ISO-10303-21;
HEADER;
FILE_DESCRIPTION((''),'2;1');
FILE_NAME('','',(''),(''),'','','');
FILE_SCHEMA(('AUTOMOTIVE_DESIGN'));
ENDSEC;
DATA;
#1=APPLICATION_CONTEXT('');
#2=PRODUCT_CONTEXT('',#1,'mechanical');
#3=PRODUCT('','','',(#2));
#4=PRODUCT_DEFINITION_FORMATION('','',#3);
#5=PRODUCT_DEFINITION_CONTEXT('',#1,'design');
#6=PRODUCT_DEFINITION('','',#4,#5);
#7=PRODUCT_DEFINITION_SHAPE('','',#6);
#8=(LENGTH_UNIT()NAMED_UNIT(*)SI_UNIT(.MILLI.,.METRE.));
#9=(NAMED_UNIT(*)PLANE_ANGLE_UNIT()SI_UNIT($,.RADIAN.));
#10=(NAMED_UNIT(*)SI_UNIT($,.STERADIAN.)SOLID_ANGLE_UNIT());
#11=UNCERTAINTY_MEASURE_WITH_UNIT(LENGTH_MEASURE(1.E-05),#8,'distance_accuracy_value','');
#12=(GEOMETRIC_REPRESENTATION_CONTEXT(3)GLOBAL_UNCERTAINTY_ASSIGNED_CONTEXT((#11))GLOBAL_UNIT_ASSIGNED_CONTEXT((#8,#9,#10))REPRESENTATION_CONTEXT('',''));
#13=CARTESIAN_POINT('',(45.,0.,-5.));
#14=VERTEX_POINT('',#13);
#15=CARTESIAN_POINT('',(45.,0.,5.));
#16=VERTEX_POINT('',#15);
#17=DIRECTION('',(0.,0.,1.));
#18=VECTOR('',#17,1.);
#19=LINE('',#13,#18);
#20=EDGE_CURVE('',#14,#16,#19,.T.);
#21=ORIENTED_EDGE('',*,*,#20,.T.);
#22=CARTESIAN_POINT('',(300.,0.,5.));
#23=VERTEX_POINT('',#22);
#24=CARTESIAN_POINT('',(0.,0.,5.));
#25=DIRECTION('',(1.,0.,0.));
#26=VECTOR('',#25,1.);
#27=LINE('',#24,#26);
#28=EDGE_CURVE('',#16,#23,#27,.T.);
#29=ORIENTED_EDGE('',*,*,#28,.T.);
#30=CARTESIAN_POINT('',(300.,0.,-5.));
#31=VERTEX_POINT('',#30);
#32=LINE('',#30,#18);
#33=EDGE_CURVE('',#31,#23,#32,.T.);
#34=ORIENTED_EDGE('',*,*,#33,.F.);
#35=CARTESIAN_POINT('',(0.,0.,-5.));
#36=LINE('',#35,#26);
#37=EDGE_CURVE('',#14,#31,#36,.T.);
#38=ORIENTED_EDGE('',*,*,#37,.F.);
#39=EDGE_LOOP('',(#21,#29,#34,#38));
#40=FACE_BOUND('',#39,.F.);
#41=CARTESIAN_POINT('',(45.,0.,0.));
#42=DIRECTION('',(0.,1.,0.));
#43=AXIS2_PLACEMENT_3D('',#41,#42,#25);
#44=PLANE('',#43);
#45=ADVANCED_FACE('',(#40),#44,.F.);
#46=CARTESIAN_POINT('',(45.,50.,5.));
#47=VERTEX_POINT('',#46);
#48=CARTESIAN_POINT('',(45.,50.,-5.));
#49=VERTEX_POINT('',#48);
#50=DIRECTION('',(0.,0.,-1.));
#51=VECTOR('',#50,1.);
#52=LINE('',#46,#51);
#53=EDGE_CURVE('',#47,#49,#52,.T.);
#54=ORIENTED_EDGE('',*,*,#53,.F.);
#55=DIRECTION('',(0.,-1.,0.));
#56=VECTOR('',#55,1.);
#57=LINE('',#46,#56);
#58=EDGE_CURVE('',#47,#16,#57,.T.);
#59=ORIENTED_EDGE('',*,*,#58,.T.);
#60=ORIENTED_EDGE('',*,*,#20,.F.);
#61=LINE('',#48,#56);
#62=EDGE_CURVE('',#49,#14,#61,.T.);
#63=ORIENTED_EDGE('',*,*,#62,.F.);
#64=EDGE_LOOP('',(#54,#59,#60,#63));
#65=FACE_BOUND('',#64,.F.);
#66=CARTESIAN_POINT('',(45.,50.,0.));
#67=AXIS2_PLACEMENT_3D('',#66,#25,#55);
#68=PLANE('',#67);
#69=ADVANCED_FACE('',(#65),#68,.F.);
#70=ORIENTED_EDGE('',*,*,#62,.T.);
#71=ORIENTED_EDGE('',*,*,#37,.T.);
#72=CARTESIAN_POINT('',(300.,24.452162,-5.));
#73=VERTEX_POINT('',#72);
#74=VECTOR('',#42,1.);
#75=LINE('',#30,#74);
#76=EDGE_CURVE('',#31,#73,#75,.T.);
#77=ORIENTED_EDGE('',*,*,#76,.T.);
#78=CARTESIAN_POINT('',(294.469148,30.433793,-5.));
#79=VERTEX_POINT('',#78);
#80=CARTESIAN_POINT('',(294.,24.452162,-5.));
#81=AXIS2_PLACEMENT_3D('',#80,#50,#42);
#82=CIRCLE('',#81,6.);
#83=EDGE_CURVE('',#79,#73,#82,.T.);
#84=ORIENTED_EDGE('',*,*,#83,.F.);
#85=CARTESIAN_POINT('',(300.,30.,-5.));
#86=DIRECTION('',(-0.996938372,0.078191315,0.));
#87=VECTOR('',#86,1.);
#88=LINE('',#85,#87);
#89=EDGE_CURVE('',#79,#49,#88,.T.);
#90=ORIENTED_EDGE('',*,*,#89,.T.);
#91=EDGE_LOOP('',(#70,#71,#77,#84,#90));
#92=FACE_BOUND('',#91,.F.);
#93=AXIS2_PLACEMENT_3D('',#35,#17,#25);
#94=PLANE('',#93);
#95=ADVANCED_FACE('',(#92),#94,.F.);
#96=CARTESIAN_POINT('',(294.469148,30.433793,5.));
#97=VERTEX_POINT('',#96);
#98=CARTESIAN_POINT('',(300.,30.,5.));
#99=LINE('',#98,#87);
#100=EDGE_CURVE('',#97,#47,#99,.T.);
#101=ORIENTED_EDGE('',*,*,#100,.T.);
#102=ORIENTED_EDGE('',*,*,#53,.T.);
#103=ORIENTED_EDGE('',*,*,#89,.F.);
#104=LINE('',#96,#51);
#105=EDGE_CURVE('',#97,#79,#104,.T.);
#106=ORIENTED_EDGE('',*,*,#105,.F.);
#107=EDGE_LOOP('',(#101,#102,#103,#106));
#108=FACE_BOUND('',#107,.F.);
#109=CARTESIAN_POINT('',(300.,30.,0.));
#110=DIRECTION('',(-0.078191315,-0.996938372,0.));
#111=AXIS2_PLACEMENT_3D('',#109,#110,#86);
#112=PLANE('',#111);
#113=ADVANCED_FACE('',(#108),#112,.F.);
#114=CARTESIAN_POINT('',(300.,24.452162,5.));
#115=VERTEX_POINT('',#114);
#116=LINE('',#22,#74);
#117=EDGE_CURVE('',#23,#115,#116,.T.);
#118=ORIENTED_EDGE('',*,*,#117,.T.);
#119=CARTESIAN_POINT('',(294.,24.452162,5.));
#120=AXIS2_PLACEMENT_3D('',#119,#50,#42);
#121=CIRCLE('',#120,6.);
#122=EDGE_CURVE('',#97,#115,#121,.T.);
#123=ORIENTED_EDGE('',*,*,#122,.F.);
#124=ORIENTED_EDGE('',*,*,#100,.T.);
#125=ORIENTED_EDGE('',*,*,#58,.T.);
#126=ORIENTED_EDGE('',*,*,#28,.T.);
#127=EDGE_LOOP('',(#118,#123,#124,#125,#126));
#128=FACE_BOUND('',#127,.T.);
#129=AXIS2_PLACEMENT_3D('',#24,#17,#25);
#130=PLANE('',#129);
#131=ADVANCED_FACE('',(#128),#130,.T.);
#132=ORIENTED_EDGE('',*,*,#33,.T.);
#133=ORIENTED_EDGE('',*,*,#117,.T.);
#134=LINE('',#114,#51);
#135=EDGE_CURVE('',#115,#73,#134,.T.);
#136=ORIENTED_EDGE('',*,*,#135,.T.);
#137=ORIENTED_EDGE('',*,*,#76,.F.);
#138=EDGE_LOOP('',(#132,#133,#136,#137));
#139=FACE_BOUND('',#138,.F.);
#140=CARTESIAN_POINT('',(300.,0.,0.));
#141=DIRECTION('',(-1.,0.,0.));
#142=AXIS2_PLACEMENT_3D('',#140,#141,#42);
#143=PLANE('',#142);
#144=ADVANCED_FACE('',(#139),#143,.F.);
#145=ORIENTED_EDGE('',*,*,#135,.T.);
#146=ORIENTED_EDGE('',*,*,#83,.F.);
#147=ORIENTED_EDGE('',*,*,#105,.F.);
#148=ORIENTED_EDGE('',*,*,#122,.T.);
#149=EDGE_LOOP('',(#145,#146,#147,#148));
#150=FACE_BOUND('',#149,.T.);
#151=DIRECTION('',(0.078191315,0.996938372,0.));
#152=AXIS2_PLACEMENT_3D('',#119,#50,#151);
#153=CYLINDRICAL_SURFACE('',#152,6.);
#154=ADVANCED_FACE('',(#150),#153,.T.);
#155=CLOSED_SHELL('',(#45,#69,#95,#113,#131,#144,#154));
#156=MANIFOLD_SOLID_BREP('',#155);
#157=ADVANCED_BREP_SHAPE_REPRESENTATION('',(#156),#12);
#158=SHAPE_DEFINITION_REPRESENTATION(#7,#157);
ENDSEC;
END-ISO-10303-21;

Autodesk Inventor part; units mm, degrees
ref_plane "YZ Plane" through (0, 0, 0) normal (1, 0, 0) x (0, 1, 0)
ref_plane "XZ Plane" through (0, 0, 0) normal (0, 1, 0) x (-1, 0, 0)
ref_plane "XY Plane" through (0, 0, 0) normal (0, 0, 1) x (1, 0, 0)
sketch "Sketch3" plane through (0, 0, 0) normal (0, 0, 1) x (1, 0, 0)
  line L0 (0, 0) -> (300, 0)
  line L1 (300, 0) -> (300, 30)
  line L2 (300, 30) -> (-5.542, 53.9641)
  line L3 (45, 50) -> (45, 0)
  dimension "d11" = 300
  dimension "d12" = 30
  dimension "d13" = 45
  dimension "d14" = 50
extrude "Plate1" add sketch "Sketch3" along normal mid plane 10
fillet "Corner Round1" radius 6 1 edges at (300, 30, 0)
equation "\"d15\" = Thickness"
equation "\"BendReliefDepth\" = 0.5 * Thickness"
equation "\"Thickness\" = 10"
properties part number "SLM 1614 charging hatch reinf 500mm_1200" material "Steel"
